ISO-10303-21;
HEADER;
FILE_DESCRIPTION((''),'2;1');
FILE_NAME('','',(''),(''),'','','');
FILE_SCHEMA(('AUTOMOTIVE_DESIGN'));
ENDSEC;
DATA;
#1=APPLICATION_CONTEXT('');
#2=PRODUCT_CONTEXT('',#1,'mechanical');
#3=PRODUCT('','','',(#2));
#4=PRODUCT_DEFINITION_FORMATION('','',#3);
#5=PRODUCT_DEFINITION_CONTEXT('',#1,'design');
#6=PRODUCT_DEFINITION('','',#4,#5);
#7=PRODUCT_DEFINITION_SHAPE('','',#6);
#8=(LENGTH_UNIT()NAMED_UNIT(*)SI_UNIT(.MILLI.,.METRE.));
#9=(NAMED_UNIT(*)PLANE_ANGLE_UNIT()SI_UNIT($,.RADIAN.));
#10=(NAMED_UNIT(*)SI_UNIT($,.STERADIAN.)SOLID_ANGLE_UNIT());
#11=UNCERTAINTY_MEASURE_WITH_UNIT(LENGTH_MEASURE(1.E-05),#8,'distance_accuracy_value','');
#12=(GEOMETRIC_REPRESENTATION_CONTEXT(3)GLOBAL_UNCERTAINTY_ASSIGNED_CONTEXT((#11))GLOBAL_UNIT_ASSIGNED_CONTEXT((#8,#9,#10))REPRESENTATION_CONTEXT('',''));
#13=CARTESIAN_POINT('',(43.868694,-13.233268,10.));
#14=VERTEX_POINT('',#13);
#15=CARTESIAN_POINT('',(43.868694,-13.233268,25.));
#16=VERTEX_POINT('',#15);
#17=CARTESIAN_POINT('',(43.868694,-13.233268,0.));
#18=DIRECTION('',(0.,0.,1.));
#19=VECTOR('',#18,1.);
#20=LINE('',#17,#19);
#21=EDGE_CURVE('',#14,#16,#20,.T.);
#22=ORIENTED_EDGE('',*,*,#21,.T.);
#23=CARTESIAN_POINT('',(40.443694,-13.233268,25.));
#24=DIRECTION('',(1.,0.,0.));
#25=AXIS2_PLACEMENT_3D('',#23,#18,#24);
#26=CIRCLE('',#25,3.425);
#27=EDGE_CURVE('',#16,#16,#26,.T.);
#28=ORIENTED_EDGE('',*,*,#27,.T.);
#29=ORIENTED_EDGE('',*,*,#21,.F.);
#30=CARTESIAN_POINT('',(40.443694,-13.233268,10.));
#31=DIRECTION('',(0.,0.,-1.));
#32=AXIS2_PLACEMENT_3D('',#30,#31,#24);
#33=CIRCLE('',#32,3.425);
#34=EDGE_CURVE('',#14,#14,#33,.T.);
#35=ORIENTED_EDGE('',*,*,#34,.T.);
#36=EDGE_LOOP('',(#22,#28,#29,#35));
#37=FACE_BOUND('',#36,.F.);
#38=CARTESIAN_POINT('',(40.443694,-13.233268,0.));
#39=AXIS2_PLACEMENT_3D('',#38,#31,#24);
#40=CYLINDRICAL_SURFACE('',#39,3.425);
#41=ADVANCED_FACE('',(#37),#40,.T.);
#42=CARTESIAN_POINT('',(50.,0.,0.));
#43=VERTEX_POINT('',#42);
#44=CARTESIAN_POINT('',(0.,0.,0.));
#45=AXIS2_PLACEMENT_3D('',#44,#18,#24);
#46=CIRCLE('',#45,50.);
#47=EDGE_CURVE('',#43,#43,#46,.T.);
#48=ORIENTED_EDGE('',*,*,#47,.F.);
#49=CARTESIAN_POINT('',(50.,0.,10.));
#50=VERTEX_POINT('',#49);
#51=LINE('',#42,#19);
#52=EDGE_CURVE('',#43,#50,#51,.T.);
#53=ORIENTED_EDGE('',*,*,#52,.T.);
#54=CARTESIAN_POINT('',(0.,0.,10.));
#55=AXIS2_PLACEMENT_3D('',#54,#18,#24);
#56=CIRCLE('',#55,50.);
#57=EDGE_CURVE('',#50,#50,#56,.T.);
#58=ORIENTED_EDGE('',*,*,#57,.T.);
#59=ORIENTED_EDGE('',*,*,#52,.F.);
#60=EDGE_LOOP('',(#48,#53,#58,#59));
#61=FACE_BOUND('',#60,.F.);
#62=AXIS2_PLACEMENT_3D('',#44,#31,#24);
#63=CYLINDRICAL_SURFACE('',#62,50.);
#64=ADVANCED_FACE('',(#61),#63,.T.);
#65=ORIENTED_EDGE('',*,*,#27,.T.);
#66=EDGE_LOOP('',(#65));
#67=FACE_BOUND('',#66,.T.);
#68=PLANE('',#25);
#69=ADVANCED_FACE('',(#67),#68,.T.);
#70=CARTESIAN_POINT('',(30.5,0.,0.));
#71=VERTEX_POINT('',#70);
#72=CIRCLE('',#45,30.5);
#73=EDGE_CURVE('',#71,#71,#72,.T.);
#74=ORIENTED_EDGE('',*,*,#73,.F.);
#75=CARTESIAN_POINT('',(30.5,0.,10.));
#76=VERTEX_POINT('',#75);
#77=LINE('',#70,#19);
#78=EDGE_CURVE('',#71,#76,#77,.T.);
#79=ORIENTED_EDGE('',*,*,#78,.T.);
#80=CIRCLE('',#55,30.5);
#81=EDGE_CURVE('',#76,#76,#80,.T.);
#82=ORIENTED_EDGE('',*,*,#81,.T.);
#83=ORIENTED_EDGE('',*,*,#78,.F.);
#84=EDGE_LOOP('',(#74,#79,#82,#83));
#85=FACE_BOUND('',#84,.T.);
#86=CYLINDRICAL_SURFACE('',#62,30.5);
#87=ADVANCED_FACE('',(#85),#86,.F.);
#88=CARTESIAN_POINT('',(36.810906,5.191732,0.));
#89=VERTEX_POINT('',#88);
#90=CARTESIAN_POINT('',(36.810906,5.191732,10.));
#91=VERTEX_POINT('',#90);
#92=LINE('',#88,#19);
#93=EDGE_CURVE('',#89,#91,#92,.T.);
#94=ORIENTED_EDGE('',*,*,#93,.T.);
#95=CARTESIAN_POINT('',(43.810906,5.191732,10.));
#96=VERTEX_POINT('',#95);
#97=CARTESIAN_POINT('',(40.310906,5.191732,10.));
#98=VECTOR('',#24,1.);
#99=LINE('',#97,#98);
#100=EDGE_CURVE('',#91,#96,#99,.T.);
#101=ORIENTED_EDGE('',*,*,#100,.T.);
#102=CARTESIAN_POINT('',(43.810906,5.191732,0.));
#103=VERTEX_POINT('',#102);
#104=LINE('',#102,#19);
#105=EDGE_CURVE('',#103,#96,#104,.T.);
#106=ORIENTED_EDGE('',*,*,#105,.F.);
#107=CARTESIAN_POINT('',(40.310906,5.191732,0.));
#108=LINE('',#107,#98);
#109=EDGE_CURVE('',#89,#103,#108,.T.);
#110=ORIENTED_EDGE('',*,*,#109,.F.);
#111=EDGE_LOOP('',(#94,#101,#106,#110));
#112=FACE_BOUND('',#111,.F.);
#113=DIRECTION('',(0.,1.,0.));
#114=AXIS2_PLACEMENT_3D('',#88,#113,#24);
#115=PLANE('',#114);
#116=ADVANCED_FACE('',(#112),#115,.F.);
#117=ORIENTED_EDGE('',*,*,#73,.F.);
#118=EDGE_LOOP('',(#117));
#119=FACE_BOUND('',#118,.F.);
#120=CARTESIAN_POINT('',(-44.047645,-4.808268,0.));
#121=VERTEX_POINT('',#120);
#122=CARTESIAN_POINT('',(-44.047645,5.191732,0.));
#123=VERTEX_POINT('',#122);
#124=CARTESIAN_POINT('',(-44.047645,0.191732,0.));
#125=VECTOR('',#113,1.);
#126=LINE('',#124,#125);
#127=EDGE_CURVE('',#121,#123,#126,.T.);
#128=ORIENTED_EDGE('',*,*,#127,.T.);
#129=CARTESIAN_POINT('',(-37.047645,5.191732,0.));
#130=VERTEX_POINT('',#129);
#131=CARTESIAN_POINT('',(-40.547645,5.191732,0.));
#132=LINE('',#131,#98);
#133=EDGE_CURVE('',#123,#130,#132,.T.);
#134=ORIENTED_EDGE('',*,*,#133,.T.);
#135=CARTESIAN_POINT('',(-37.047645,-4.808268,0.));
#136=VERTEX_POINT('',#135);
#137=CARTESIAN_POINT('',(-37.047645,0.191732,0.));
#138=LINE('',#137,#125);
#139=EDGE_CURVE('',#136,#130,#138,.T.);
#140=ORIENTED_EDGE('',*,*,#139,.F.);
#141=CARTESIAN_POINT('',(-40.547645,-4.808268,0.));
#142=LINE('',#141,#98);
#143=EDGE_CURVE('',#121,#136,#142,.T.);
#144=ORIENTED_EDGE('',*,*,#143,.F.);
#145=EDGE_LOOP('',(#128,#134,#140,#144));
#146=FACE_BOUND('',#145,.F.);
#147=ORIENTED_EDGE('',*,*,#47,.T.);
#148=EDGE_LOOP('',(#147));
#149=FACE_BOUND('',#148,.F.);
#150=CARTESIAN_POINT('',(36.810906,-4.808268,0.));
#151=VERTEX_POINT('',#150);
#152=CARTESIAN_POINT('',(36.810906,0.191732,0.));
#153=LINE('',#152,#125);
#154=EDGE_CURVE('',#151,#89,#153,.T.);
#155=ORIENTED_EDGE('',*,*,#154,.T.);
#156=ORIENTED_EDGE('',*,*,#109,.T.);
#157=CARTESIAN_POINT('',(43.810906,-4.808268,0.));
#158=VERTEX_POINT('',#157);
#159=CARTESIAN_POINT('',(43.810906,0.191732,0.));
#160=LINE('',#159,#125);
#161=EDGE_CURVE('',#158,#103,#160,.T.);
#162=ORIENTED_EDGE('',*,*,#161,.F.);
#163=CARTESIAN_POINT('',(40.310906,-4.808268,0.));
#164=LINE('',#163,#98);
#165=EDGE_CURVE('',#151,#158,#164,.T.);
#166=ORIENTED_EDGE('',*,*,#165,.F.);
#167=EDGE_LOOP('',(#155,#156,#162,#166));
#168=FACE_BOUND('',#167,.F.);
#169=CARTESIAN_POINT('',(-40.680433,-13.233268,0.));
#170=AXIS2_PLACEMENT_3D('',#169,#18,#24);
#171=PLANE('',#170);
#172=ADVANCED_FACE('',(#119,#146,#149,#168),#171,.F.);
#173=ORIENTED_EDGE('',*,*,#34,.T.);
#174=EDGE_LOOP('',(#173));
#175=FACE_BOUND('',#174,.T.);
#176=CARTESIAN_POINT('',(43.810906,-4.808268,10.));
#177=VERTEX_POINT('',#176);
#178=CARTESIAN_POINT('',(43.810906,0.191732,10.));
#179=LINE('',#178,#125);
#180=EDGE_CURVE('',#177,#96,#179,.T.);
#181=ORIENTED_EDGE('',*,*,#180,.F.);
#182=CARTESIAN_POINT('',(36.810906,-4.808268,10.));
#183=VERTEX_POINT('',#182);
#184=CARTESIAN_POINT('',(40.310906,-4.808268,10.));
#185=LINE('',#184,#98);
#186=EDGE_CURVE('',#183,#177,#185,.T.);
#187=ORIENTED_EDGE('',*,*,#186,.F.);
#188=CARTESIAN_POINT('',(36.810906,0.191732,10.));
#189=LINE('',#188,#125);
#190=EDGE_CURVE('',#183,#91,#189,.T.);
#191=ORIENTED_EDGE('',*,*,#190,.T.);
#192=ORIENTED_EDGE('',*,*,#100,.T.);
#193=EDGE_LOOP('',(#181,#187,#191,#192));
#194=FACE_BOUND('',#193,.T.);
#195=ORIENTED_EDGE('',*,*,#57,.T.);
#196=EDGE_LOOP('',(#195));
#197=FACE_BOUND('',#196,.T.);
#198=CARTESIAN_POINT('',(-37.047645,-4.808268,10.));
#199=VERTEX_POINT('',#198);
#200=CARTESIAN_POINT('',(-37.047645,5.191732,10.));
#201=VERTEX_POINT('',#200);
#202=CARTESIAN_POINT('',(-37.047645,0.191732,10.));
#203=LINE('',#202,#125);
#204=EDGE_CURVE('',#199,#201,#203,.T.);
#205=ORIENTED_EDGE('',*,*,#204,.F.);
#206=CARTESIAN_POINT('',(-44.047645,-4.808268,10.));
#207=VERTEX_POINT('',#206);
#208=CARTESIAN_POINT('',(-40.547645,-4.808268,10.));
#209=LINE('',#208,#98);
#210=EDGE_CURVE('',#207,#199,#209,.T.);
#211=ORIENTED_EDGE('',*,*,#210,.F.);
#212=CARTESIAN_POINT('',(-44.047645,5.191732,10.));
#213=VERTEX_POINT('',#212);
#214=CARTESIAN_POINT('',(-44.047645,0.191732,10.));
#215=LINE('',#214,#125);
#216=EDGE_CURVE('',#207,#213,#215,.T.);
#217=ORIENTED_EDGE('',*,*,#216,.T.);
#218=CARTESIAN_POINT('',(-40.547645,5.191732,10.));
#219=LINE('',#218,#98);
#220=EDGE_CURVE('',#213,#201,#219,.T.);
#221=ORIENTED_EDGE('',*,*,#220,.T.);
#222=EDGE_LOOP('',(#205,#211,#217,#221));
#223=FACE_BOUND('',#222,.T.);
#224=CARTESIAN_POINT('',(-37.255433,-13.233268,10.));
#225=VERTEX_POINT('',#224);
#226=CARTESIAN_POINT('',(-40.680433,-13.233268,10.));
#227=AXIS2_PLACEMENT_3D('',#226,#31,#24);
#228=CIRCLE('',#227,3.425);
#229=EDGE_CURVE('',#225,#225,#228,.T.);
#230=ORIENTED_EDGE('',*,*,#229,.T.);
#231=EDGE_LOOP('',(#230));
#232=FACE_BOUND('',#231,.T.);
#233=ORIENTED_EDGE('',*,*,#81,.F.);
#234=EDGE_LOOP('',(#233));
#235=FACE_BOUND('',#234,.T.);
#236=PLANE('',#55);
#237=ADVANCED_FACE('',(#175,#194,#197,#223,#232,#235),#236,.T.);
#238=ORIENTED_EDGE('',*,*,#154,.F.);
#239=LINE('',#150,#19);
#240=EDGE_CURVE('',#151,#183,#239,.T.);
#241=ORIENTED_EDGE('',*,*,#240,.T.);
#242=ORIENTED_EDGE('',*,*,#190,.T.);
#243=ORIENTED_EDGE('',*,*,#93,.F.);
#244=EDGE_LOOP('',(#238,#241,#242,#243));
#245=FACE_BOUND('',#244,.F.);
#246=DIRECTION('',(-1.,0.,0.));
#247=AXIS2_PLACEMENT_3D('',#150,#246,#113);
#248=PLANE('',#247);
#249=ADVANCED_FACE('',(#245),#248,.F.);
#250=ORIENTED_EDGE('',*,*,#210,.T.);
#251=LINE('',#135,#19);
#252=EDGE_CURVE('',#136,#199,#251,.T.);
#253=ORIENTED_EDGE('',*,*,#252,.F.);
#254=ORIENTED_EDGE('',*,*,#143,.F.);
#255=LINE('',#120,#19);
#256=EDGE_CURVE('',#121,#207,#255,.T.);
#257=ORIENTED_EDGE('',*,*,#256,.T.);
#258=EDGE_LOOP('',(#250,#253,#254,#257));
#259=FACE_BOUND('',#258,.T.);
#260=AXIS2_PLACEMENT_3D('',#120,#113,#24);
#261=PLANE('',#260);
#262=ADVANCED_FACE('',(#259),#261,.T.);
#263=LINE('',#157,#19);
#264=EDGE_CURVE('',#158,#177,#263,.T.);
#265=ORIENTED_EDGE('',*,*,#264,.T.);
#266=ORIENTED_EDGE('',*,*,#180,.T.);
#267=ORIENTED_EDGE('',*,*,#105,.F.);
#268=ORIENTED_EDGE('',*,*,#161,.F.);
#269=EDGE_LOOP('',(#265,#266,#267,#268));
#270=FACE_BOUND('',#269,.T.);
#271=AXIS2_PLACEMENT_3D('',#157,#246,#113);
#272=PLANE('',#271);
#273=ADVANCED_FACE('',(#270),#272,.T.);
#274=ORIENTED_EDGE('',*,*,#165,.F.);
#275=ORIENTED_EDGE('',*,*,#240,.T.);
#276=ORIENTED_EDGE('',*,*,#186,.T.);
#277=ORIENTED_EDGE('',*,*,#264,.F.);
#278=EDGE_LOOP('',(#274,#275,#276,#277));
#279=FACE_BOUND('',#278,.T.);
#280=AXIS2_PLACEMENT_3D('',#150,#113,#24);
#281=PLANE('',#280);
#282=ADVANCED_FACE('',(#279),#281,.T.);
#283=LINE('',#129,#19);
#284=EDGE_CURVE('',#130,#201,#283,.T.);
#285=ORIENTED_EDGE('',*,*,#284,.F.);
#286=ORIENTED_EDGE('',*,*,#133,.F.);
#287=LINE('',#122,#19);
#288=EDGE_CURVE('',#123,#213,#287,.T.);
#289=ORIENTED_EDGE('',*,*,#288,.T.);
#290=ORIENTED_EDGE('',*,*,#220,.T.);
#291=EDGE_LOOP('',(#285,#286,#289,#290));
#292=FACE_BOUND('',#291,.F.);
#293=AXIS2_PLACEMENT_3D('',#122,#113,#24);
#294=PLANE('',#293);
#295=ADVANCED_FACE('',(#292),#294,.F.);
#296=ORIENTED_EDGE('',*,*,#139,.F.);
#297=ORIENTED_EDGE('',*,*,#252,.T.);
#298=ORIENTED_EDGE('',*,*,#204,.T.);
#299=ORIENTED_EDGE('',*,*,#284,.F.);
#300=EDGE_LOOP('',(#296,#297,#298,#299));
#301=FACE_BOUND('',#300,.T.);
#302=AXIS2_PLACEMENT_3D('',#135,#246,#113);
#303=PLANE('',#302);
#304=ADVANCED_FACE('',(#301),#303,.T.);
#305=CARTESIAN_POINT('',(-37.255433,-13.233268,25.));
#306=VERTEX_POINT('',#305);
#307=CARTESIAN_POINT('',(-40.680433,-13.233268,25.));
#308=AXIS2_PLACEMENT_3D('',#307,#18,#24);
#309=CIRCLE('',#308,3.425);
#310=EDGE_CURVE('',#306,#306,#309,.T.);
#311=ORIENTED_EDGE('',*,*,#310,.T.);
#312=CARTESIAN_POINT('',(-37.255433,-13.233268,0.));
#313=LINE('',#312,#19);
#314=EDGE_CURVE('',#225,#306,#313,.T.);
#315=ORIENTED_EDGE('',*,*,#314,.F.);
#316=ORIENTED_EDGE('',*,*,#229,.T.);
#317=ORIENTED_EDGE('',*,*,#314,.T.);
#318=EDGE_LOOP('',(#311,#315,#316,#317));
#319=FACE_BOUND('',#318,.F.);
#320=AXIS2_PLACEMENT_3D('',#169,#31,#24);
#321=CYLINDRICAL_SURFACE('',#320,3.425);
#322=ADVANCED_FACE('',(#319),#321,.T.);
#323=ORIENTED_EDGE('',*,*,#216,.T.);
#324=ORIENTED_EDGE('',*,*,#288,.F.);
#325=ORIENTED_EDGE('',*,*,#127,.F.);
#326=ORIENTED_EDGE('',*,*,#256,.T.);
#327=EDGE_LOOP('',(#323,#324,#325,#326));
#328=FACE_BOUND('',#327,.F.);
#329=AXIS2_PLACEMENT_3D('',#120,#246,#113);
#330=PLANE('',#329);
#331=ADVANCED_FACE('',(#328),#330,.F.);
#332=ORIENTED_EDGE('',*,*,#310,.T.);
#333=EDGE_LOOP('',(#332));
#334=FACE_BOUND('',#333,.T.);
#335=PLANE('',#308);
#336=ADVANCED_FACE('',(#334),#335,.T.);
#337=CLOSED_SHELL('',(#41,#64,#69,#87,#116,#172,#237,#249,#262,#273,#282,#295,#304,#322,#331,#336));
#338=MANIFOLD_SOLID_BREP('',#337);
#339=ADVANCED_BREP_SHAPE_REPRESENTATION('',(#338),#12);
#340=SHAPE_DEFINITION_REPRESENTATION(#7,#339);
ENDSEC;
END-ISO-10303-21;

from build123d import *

# Parameters (mm, degrees)
F0_R     = 50
F0_R_2   = 3.425
F0_W     = 7
F0_H     = 10
F0_R_3   = 30.5
F1_DEPTH = 10
F2_DEPTH = 25


# Not quite as in the source:
# - a feature names something its author has since deleted; it is built from what else it names


with BuildPart() as f1:
    # F0 (on Top) → F1 (new body)
    with BuildSketch(Plane.XY):
        Circle(F0_R)
        with Locations((-40.6804330647, -13.233267504)):
            Circle(F0_R_2, mode=Mode.SUBTRACT)
        with Locations((40.4436938465, -13.233267504)):
            Circle(F0_R_2, mode=Mode.SUBTRACT)
        with Locations((-40.547645092, 0.191732496)):
            Rectangle(F0_W, F0_H, mode=Mode.SUBTRACT)
        Circle(F0_R_3, mode=Mode.SUBTRACT)
        with Locations((40.3109058738, 0.191732496)):
            Rectangle(F0_W, F0_H, mode=Mode.SUBTRACT)
        with Locations((-40.6804330647, -13.233267504)):
            Circle(F0_R_2)
        with Locations((40.4436938465, -13.233267504)):
            Circle(F0_R_2)
    extrude(amount=F1_DEPTH)

    # F0 (on Top) → F2 (join)
    with BuildSketch(Plane.XY):
        with Locations((-40.6804330647, -13.233267504)):
            Circle(F0_R_2)
        with Locations((40.4436938465, -13.233267504)):
            Circle(F0_R_2)
    extrude(amount=F2_DEPTH)


solid = f1.part
